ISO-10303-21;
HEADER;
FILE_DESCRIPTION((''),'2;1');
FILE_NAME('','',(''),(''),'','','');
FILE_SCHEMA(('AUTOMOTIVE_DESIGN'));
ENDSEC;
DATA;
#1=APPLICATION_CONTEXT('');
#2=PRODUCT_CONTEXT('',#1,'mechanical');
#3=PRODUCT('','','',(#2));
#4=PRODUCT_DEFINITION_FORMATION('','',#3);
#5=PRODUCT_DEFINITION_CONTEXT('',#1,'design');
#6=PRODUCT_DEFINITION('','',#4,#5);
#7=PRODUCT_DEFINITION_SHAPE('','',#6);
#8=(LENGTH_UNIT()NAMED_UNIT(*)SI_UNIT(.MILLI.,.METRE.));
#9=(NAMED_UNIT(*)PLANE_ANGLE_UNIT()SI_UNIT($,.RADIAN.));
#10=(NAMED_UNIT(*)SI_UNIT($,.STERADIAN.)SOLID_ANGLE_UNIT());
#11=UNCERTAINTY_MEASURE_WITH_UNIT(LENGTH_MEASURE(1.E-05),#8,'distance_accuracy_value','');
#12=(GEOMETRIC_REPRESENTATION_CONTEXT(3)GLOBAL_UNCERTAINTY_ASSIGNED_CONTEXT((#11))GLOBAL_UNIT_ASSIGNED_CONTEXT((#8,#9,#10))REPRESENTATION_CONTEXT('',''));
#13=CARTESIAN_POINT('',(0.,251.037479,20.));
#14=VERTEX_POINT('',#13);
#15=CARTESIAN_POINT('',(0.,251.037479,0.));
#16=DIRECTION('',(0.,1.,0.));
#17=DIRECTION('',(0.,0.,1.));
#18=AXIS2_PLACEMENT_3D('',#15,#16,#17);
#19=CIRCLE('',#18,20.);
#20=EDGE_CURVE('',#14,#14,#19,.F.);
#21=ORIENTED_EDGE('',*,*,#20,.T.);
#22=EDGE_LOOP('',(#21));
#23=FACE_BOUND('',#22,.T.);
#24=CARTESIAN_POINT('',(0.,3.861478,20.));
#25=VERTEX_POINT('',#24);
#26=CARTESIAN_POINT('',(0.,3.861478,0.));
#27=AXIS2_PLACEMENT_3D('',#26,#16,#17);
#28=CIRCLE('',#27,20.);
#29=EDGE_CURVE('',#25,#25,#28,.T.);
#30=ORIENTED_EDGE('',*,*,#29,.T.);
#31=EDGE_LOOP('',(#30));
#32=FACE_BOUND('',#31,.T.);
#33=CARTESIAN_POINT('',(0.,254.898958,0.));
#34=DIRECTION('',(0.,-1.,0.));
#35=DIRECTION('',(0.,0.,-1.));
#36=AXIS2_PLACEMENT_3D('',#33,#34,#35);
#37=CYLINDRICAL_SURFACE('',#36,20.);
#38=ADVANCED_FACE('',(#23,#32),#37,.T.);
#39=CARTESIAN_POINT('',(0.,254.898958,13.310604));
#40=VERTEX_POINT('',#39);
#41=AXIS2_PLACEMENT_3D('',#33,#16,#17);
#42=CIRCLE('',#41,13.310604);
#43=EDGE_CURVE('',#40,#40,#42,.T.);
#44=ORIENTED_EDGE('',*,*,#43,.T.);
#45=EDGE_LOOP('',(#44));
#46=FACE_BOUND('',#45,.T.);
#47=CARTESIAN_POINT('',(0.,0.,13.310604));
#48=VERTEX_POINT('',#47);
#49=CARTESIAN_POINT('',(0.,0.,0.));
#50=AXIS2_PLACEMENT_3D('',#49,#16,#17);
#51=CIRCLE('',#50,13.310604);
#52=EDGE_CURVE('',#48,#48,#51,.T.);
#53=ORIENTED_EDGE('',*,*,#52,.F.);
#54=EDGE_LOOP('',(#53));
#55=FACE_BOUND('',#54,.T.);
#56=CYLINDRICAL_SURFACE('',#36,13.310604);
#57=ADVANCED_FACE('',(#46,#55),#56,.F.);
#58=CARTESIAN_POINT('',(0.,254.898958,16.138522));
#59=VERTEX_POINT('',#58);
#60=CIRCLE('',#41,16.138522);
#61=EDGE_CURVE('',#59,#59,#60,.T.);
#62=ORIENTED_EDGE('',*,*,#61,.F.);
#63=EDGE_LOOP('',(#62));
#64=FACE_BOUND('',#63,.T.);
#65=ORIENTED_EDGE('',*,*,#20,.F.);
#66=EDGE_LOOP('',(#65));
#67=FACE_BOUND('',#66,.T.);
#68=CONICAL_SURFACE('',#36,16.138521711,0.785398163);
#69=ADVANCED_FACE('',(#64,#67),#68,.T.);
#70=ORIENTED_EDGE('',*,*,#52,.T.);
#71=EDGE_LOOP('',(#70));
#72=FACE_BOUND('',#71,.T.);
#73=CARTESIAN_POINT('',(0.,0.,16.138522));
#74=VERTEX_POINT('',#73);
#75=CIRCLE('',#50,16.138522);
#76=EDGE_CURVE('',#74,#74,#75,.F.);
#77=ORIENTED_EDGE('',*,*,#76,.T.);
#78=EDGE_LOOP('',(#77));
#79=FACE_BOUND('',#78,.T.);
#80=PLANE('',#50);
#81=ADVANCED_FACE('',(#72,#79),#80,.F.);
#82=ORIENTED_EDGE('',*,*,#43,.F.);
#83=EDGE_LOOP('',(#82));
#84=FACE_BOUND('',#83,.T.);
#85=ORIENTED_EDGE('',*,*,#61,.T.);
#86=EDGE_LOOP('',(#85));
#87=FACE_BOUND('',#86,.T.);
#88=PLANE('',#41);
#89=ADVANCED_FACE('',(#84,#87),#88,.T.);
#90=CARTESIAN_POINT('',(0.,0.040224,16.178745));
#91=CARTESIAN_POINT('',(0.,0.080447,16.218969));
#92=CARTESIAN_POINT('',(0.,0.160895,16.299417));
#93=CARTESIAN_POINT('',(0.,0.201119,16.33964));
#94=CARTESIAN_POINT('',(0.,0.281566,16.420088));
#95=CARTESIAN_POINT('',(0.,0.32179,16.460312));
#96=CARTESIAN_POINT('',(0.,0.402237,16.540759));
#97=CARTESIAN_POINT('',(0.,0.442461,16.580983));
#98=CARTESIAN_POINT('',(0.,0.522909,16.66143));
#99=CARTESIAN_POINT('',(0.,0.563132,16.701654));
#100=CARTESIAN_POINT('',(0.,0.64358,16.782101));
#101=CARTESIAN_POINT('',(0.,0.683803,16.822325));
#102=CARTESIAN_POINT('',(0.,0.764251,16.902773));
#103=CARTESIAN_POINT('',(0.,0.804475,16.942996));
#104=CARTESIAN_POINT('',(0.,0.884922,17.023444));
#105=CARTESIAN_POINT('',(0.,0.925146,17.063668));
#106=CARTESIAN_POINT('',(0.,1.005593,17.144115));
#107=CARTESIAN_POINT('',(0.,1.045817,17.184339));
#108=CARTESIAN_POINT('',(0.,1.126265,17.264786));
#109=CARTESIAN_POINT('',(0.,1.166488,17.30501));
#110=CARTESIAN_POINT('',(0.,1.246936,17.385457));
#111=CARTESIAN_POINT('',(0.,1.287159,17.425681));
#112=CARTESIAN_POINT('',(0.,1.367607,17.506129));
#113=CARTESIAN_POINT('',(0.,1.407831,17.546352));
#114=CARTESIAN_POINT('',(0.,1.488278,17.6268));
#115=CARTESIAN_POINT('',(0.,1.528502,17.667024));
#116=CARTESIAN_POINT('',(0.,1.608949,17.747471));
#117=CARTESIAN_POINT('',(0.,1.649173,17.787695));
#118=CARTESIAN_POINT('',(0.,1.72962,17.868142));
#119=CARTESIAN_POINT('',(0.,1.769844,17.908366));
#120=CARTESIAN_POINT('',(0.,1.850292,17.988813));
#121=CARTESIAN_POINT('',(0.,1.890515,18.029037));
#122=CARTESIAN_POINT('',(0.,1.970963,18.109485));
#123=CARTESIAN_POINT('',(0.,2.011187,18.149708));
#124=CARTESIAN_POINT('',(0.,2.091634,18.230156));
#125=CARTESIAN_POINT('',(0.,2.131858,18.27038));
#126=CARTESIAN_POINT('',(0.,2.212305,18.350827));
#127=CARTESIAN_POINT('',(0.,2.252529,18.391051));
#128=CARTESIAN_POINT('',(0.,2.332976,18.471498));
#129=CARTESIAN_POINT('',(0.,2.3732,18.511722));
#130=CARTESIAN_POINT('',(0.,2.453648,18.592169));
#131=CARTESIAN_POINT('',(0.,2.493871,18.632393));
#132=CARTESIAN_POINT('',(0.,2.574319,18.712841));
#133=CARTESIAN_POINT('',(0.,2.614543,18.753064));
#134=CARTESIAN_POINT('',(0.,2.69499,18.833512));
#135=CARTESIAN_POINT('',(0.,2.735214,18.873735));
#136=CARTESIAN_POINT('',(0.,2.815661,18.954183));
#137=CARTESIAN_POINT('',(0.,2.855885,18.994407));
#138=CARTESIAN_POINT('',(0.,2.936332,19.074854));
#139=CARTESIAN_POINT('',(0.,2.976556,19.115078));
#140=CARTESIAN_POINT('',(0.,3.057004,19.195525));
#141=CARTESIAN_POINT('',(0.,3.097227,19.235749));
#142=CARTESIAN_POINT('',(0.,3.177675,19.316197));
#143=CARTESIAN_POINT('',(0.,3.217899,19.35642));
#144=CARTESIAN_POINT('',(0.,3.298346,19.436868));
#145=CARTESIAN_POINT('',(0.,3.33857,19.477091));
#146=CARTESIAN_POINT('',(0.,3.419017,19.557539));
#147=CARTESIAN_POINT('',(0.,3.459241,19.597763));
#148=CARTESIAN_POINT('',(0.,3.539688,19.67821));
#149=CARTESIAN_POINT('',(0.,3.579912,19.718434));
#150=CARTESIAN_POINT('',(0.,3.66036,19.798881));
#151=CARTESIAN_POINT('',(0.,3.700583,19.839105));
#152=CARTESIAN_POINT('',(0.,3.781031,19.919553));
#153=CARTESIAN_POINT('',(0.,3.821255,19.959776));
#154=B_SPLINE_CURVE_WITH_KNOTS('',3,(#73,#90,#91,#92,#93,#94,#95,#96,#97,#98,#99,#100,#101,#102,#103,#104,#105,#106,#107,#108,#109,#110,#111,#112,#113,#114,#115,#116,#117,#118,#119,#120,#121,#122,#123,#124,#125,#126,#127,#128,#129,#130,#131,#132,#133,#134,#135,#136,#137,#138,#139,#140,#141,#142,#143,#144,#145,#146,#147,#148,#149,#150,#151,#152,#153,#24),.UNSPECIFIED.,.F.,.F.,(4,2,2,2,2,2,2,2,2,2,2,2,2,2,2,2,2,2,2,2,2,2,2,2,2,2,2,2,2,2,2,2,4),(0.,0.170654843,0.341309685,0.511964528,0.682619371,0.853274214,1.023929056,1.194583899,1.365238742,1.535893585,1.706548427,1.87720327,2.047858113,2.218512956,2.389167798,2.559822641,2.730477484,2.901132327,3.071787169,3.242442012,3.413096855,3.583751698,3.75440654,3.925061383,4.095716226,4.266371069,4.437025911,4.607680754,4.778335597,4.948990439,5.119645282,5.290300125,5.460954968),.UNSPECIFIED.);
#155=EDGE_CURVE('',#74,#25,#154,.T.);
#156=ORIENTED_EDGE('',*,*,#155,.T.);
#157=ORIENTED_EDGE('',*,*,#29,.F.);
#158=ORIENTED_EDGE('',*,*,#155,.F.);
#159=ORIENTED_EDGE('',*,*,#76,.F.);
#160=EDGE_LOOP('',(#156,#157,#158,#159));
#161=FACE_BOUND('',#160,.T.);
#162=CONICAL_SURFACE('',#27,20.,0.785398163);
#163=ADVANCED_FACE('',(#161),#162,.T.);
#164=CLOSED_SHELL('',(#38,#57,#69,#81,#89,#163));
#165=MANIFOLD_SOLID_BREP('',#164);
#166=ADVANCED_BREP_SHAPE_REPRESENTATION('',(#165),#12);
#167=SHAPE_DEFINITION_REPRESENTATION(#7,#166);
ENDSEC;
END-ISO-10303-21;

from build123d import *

# Parameters (mm, degrees)
SKETCH1_R           = 20
BOSS_EXTRUDE1_DEPTH = 254.898957635
SKETCH2_R           = 13.310604037
CUT_EXTRUDE1_DEPTH  = 257.463405973
CHAMFER1_SIZE       = 3.861478289


with BuildPart() as part:
    # Sketch1 → Boss-Extrude1 (new body)
    with BuildSketch(Plane(origin=(0, 0, 0), x_dir=(1, 0, 0), z_dir=(0, 1, 0))):
        Circle(SKETCH1_R)
    extrude(amount=BOSS_EXTRUDE1_DEPTH)

    # Sketch2 → Cut-Extrude1 (cut, through all)
    with BuildSketch(Plane(origin=(0, 0, 0), x_dir=(1, 0, 0), z_dir=(0, 1, 0))):
        Circle(SKETCH2_R)
    extrude(amount=CUT_EXTRUDE1_DEPTH, mode=Mode.SUBTRACT)

    # Chamfer1
    chamfer1_edges = [part.edges().sort_by_distance(p)[0] for p in [
        (-20, 254.898957635, 0),
        (-20, 0, 0),
    ]]
    chamfer(chamfer1_edges, length=CHAMFER1_SIZE)


solid = part.part
